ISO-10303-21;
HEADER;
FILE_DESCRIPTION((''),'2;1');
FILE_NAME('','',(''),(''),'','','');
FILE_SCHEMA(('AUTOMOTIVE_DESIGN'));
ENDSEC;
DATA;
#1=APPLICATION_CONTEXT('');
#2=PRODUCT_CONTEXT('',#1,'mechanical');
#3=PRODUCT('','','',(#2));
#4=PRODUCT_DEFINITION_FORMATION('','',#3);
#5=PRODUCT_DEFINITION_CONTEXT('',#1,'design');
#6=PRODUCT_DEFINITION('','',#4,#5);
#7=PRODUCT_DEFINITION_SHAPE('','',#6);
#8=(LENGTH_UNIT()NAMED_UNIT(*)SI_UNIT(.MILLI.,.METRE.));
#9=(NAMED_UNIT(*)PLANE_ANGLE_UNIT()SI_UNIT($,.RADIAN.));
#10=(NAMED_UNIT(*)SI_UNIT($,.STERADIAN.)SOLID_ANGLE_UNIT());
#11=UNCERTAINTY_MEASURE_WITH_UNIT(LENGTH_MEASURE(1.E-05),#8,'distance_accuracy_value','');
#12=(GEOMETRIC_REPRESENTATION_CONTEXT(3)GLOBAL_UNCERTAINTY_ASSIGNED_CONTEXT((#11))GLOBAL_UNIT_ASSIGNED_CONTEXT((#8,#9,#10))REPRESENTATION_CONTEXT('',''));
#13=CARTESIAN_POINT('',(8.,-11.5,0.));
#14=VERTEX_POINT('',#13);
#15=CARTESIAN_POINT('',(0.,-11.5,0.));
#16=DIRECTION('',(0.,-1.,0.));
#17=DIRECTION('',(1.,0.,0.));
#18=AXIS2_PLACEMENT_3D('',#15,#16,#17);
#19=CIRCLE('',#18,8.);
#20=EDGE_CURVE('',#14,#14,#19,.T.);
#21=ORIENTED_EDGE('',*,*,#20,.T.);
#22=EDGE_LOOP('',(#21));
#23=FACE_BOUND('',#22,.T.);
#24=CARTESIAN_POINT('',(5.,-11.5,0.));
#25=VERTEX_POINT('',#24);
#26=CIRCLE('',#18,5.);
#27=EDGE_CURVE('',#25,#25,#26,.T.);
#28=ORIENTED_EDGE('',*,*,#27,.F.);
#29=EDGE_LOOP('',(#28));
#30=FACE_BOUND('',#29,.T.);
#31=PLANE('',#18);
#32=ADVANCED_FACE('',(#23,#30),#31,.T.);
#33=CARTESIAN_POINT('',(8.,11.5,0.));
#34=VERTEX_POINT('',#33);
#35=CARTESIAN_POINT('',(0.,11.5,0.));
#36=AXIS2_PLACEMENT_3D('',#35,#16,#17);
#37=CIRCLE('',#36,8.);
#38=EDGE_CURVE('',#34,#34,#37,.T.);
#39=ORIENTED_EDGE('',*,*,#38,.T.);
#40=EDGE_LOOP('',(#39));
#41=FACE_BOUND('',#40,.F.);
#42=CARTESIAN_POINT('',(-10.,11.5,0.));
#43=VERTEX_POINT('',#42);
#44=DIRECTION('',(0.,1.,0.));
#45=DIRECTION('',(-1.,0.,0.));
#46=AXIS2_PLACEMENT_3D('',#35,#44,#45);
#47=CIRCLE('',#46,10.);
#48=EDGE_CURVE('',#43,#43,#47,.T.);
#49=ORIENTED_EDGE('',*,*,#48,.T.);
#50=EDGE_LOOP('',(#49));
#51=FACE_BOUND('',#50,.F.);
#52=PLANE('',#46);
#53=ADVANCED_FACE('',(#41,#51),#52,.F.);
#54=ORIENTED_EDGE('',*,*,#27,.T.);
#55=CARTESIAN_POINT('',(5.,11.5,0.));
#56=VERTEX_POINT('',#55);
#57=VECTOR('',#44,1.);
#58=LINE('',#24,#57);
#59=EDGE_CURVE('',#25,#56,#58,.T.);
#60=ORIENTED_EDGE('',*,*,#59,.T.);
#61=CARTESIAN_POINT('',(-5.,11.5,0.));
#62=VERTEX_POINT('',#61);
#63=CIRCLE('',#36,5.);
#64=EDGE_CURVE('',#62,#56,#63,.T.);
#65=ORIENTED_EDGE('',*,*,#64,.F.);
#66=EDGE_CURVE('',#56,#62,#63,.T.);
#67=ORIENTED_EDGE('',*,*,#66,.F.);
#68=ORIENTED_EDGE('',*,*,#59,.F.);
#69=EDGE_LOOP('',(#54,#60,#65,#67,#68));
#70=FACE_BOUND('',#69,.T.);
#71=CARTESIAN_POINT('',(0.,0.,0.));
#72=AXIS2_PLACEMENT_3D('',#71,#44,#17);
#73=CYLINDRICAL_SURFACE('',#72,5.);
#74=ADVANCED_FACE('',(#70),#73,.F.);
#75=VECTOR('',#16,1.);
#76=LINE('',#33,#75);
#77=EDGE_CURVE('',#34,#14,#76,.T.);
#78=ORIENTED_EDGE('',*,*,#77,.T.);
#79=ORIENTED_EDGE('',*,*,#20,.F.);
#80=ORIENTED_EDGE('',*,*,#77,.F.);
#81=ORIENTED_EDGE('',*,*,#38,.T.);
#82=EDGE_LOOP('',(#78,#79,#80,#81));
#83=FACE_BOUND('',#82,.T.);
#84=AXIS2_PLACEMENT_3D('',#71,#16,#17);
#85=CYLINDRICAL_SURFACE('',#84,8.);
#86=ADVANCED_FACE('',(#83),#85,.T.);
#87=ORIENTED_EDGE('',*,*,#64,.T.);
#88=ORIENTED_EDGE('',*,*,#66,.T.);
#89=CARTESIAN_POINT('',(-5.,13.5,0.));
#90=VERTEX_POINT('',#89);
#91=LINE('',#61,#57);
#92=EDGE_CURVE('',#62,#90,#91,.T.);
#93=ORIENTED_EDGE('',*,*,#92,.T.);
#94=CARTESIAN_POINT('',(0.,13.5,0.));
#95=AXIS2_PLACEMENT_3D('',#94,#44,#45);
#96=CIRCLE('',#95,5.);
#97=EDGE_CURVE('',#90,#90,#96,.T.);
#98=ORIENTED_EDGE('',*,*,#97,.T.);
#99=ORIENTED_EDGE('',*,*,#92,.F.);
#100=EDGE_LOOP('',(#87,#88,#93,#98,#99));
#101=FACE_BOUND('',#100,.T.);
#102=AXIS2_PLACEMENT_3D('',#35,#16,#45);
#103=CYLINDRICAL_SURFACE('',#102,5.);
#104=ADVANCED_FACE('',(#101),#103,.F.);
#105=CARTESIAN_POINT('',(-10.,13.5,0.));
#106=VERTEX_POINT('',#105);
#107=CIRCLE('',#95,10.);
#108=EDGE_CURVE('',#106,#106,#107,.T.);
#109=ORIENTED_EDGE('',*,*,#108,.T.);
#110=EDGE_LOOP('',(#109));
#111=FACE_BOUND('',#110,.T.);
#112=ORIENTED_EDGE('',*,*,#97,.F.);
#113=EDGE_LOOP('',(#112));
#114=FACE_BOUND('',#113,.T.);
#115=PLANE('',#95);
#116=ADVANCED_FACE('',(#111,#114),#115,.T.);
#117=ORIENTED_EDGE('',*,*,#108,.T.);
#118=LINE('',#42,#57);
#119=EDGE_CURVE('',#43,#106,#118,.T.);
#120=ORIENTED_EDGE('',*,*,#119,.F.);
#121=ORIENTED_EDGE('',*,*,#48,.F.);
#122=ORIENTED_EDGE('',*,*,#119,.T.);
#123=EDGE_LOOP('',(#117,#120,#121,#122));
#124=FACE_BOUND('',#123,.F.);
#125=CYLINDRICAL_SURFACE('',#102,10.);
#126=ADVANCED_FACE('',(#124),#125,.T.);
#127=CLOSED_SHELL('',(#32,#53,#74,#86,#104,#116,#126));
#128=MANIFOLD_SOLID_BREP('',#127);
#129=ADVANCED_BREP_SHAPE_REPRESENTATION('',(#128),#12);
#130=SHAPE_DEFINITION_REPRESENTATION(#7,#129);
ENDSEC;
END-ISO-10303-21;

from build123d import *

# Parameters (mm, degrees)
F0_R     = 8
F0_R_2   = 5
F1_DEPTH = 11.5
F2_R     = 10
F2_R_2   = 8
F2_R_3   = 5
F3_DEPTH = 2


with BuildPart() as f1:
    # F0 (on Front) → F1 (new body, symmetric)
    with BuildSketch(Plane.XZ):
        Circle(F0_R)
        Circle(F0_R_2, mode=Mode.SUBTRACT)
    extrude(amount=F1_DEPTH, both=True)

    # F2 (on face) → F3 (join)
    with BuildSketch(Plane(origin=(0, 11.5, 0), x_dir=(-1, 0, 0), z_dir=(0, 1, 0))):
        Circle(F2_R)
        Circle(F2_R_2, mode=Mode.SUBTRACT)
        Circle(F2_R_2)
        Circle(F2_R_3, mode=Mode.SUBTRACT)
    extrude(amount=F3_DEPTH)


solid = f1.part
